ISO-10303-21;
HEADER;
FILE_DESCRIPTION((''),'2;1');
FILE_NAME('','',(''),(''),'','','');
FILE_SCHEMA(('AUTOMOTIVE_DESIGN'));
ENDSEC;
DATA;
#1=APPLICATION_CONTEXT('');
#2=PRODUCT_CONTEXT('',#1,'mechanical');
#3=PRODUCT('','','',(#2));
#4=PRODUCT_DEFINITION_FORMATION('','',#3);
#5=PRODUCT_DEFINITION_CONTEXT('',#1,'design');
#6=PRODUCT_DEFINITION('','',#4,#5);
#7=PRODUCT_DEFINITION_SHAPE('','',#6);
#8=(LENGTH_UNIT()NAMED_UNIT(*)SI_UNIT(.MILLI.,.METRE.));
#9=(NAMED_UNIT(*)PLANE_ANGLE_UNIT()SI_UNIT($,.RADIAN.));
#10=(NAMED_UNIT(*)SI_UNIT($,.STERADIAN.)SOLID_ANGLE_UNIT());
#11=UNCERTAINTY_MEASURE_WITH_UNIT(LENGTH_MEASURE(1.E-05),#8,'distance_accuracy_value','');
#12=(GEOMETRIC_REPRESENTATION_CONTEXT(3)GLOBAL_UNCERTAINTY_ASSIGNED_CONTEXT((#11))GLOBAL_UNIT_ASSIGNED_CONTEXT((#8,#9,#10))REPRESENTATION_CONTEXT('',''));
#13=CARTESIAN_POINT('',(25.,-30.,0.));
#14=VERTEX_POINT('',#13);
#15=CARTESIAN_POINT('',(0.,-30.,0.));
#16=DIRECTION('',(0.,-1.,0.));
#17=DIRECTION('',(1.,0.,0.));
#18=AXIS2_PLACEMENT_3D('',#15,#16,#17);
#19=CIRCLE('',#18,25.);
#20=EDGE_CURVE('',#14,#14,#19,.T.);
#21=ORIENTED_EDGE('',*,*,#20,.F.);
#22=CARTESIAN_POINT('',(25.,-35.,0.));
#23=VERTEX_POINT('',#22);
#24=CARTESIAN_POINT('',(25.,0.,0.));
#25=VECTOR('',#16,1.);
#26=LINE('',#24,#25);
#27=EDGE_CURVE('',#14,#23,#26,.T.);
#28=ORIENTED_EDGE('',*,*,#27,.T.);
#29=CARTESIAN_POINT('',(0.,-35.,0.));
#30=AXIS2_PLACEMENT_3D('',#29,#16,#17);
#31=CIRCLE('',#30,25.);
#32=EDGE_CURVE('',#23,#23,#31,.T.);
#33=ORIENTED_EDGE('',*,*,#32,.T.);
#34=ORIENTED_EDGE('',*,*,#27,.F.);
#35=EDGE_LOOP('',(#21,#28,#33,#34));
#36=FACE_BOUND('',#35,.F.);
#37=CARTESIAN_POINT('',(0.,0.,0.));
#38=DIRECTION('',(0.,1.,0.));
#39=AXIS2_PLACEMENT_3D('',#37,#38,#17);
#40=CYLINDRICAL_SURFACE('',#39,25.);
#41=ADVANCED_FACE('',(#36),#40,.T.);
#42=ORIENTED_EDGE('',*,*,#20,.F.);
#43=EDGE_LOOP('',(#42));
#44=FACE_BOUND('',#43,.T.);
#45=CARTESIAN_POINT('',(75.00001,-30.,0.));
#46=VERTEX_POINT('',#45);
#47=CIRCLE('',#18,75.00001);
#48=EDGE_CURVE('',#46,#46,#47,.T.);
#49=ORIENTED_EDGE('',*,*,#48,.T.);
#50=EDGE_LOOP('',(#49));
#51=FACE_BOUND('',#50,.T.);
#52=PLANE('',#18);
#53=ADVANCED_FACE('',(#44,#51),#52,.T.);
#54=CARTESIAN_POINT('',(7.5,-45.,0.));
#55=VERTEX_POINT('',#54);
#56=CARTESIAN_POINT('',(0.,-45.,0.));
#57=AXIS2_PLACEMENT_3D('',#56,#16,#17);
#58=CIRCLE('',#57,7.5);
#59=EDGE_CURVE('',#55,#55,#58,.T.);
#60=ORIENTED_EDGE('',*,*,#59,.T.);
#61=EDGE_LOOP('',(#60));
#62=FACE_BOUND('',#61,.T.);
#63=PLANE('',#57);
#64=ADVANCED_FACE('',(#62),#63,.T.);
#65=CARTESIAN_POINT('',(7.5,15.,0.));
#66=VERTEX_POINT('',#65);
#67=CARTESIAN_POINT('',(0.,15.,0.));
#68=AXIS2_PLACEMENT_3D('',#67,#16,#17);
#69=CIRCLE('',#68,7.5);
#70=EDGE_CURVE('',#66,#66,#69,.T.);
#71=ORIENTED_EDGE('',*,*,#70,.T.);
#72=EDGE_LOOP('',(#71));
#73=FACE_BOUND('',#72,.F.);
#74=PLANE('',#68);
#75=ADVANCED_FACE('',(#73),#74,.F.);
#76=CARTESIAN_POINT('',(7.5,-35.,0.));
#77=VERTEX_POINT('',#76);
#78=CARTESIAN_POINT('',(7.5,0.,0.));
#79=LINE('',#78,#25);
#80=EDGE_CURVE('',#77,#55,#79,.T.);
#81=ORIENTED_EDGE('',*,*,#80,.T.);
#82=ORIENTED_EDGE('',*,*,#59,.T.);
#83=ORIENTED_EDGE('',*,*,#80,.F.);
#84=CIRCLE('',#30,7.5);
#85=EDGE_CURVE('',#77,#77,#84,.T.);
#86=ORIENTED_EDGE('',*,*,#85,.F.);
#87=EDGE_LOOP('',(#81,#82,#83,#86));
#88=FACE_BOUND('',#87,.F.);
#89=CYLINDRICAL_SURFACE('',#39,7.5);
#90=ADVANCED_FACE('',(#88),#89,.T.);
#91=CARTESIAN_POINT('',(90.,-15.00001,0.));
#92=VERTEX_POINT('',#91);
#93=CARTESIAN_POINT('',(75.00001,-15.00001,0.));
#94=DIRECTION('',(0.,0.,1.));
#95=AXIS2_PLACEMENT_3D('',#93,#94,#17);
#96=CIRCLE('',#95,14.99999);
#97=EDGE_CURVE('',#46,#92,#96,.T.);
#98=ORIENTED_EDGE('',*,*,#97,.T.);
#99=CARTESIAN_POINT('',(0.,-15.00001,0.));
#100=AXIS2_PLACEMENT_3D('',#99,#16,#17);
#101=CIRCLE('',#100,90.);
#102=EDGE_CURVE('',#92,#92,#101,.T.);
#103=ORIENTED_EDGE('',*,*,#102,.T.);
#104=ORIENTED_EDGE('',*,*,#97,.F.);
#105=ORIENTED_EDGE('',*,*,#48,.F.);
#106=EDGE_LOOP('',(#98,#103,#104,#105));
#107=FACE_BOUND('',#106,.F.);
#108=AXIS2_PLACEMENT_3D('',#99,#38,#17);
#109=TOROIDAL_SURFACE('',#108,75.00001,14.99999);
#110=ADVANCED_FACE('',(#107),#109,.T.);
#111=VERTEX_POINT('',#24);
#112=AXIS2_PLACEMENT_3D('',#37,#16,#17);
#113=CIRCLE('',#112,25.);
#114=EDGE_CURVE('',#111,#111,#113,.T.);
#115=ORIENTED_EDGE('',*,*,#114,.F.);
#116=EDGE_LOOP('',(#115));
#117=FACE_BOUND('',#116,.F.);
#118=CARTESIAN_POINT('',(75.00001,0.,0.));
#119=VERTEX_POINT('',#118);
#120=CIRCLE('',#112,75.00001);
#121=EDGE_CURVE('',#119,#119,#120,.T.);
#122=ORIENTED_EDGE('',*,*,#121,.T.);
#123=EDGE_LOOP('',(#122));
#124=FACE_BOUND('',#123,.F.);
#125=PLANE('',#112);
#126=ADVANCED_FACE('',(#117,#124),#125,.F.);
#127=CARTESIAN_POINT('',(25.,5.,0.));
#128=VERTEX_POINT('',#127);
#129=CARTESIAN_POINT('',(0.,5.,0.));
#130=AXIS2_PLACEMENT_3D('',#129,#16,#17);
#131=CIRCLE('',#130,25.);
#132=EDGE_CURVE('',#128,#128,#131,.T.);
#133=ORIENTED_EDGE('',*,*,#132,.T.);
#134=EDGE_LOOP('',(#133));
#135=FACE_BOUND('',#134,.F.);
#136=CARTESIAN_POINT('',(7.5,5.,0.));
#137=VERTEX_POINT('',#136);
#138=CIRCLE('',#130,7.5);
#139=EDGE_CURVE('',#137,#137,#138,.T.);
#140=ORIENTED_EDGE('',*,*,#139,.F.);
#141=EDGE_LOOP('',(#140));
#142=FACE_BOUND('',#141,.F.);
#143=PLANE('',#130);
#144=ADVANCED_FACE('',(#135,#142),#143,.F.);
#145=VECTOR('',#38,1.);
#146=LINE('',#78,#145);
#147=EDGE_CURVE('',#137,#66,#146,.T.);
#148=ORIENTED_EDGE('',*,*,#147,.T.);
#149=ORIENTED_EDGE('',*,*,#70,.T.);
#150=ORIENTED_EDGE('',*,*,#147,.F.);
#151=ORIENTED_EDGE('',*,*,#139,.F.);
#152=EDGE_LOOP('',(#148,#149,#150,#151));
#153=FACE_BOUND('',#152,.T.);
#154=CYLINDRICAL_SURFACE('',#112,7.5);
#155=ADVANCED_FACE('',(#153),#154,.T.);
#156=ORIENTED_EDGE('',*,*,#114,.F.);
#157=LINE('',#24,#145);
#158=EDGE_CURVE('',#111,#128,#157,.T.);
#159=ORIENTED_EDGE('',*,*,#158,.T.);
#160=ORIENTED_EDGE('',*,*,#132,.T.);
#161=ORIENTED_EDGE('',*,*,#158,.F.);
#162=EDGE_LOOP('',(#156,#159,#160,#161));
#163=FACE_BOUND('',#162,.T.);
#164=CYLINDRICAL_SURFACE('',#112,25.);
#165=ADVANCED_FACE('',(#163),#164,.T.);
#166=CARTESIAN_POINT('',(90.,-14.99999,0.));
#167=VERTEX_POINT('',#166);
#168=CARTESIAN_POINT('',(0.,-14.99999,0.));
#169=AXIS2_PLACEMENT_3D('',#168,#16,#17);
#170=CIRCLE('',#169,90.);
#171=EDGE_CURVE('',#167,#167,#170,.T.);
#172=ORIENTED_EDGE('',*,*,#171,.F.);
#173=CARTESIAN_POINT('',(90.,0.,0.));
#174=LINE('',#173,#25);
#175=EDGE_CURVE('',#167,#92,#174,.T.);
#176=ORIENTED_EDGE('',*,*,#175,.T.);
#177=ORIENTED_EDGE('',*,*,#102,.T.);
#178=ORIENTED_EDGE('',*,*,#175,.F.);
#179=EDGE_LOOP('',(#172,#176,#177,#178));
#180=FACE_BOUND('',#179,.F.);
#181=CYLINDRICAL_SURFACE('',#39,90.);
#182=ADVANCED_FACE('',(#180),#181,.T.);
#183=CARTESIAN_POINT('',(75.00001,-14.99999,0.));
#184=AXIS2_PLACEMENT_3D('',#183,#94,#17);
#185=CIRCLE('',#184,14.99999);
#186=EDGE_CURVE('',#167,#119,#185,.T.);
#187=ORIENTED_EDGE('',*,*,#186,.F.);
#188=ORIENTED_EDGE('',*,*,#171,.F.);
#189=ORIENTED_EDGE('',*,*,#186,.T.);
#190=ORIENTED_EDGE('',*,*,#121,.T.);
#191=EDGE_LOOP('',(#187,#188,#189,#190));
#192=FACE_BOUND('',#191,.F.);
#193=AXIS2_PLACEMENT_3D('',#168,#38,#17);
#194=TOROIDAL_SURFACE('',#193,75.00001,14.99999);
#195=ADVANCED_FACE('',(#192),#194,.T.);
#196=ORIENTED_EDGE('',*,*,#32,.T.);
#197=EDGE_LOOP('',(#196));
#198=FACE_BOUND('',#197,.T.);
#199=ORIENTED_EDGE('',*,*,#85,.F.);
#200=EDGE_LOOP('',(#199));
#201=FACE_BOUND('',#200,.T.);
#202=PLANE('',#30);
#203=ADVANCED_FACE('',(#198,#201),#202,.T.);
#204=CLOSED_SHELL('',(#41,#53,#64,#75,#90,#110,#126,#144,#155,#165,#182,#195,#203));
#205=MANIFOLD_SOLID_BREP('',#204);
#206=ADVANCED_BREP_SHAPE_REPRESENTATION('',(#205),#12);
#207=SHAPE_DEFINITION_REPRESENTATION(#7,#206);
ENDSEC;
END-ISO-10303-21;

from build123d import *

# Parameters (mm, degrees)
F0_R          = 90
F0_R_2        = 25
F1_DEPTH      = 30
F0_R_3        = 7.5
F2_DEPTH      = 35
F3_R          = 14.99999
F4_DEPTH      = 5
F5_DEPTH      = 15
F5_DEPTH_BACK = 45


# Not quite as in the source:
# - a fillet or chamfer is up to 0.001 mm smaller than in the source, because OpenCascade refuses the exact size


with BuildPart() as f1:
    # F0 (on Front) → F1 (new body)
    with BuildSketch(Plane.XZ):
        Circle(F0_R)
        Circle(F0_R_2, mode=Mode.SUBTRACT)
    extrude(amount=F1_DEPTH)

    # F0 (on Front) → F2 (join)
    with BuildSketch(Plane.XZ):
        Circle(F0_R_2)
        Circle(F0_R_3, mode=Mode.SUBTRACT)
    extrude(amount=F2_DEPTH)

    # F3 (radius 15 in the source; OpenCascade refuses exactly that, so slightly less here)
    f3_edges = [f1.edges().sort_by_distance(p)[0] for p in [
        (-90, -30, 0),
        (-90, 0, 0),
    ]]
    fillet(f3_edges, radius=F3_R)

    # F0 (on Front) → F4 (join)
    with BuildSketch(Plane.XZ):
        Circle(F0_R_2)
        Circle(F0_R_3, mode=Mode.SUBTRACT)
    extrude(amount=-F4_DEPTH)

    # F0 (on Front) → F5 (join, two sides)
    with BuildSketch(Plane.XZ) as f5_sk:
        Circle(F0_R_3)
    extrude(amount=-F5_DEPTH)
    extrude(f5_sk.sketch, amount=F5_DEPTH_BACK)


solid = f1.part
